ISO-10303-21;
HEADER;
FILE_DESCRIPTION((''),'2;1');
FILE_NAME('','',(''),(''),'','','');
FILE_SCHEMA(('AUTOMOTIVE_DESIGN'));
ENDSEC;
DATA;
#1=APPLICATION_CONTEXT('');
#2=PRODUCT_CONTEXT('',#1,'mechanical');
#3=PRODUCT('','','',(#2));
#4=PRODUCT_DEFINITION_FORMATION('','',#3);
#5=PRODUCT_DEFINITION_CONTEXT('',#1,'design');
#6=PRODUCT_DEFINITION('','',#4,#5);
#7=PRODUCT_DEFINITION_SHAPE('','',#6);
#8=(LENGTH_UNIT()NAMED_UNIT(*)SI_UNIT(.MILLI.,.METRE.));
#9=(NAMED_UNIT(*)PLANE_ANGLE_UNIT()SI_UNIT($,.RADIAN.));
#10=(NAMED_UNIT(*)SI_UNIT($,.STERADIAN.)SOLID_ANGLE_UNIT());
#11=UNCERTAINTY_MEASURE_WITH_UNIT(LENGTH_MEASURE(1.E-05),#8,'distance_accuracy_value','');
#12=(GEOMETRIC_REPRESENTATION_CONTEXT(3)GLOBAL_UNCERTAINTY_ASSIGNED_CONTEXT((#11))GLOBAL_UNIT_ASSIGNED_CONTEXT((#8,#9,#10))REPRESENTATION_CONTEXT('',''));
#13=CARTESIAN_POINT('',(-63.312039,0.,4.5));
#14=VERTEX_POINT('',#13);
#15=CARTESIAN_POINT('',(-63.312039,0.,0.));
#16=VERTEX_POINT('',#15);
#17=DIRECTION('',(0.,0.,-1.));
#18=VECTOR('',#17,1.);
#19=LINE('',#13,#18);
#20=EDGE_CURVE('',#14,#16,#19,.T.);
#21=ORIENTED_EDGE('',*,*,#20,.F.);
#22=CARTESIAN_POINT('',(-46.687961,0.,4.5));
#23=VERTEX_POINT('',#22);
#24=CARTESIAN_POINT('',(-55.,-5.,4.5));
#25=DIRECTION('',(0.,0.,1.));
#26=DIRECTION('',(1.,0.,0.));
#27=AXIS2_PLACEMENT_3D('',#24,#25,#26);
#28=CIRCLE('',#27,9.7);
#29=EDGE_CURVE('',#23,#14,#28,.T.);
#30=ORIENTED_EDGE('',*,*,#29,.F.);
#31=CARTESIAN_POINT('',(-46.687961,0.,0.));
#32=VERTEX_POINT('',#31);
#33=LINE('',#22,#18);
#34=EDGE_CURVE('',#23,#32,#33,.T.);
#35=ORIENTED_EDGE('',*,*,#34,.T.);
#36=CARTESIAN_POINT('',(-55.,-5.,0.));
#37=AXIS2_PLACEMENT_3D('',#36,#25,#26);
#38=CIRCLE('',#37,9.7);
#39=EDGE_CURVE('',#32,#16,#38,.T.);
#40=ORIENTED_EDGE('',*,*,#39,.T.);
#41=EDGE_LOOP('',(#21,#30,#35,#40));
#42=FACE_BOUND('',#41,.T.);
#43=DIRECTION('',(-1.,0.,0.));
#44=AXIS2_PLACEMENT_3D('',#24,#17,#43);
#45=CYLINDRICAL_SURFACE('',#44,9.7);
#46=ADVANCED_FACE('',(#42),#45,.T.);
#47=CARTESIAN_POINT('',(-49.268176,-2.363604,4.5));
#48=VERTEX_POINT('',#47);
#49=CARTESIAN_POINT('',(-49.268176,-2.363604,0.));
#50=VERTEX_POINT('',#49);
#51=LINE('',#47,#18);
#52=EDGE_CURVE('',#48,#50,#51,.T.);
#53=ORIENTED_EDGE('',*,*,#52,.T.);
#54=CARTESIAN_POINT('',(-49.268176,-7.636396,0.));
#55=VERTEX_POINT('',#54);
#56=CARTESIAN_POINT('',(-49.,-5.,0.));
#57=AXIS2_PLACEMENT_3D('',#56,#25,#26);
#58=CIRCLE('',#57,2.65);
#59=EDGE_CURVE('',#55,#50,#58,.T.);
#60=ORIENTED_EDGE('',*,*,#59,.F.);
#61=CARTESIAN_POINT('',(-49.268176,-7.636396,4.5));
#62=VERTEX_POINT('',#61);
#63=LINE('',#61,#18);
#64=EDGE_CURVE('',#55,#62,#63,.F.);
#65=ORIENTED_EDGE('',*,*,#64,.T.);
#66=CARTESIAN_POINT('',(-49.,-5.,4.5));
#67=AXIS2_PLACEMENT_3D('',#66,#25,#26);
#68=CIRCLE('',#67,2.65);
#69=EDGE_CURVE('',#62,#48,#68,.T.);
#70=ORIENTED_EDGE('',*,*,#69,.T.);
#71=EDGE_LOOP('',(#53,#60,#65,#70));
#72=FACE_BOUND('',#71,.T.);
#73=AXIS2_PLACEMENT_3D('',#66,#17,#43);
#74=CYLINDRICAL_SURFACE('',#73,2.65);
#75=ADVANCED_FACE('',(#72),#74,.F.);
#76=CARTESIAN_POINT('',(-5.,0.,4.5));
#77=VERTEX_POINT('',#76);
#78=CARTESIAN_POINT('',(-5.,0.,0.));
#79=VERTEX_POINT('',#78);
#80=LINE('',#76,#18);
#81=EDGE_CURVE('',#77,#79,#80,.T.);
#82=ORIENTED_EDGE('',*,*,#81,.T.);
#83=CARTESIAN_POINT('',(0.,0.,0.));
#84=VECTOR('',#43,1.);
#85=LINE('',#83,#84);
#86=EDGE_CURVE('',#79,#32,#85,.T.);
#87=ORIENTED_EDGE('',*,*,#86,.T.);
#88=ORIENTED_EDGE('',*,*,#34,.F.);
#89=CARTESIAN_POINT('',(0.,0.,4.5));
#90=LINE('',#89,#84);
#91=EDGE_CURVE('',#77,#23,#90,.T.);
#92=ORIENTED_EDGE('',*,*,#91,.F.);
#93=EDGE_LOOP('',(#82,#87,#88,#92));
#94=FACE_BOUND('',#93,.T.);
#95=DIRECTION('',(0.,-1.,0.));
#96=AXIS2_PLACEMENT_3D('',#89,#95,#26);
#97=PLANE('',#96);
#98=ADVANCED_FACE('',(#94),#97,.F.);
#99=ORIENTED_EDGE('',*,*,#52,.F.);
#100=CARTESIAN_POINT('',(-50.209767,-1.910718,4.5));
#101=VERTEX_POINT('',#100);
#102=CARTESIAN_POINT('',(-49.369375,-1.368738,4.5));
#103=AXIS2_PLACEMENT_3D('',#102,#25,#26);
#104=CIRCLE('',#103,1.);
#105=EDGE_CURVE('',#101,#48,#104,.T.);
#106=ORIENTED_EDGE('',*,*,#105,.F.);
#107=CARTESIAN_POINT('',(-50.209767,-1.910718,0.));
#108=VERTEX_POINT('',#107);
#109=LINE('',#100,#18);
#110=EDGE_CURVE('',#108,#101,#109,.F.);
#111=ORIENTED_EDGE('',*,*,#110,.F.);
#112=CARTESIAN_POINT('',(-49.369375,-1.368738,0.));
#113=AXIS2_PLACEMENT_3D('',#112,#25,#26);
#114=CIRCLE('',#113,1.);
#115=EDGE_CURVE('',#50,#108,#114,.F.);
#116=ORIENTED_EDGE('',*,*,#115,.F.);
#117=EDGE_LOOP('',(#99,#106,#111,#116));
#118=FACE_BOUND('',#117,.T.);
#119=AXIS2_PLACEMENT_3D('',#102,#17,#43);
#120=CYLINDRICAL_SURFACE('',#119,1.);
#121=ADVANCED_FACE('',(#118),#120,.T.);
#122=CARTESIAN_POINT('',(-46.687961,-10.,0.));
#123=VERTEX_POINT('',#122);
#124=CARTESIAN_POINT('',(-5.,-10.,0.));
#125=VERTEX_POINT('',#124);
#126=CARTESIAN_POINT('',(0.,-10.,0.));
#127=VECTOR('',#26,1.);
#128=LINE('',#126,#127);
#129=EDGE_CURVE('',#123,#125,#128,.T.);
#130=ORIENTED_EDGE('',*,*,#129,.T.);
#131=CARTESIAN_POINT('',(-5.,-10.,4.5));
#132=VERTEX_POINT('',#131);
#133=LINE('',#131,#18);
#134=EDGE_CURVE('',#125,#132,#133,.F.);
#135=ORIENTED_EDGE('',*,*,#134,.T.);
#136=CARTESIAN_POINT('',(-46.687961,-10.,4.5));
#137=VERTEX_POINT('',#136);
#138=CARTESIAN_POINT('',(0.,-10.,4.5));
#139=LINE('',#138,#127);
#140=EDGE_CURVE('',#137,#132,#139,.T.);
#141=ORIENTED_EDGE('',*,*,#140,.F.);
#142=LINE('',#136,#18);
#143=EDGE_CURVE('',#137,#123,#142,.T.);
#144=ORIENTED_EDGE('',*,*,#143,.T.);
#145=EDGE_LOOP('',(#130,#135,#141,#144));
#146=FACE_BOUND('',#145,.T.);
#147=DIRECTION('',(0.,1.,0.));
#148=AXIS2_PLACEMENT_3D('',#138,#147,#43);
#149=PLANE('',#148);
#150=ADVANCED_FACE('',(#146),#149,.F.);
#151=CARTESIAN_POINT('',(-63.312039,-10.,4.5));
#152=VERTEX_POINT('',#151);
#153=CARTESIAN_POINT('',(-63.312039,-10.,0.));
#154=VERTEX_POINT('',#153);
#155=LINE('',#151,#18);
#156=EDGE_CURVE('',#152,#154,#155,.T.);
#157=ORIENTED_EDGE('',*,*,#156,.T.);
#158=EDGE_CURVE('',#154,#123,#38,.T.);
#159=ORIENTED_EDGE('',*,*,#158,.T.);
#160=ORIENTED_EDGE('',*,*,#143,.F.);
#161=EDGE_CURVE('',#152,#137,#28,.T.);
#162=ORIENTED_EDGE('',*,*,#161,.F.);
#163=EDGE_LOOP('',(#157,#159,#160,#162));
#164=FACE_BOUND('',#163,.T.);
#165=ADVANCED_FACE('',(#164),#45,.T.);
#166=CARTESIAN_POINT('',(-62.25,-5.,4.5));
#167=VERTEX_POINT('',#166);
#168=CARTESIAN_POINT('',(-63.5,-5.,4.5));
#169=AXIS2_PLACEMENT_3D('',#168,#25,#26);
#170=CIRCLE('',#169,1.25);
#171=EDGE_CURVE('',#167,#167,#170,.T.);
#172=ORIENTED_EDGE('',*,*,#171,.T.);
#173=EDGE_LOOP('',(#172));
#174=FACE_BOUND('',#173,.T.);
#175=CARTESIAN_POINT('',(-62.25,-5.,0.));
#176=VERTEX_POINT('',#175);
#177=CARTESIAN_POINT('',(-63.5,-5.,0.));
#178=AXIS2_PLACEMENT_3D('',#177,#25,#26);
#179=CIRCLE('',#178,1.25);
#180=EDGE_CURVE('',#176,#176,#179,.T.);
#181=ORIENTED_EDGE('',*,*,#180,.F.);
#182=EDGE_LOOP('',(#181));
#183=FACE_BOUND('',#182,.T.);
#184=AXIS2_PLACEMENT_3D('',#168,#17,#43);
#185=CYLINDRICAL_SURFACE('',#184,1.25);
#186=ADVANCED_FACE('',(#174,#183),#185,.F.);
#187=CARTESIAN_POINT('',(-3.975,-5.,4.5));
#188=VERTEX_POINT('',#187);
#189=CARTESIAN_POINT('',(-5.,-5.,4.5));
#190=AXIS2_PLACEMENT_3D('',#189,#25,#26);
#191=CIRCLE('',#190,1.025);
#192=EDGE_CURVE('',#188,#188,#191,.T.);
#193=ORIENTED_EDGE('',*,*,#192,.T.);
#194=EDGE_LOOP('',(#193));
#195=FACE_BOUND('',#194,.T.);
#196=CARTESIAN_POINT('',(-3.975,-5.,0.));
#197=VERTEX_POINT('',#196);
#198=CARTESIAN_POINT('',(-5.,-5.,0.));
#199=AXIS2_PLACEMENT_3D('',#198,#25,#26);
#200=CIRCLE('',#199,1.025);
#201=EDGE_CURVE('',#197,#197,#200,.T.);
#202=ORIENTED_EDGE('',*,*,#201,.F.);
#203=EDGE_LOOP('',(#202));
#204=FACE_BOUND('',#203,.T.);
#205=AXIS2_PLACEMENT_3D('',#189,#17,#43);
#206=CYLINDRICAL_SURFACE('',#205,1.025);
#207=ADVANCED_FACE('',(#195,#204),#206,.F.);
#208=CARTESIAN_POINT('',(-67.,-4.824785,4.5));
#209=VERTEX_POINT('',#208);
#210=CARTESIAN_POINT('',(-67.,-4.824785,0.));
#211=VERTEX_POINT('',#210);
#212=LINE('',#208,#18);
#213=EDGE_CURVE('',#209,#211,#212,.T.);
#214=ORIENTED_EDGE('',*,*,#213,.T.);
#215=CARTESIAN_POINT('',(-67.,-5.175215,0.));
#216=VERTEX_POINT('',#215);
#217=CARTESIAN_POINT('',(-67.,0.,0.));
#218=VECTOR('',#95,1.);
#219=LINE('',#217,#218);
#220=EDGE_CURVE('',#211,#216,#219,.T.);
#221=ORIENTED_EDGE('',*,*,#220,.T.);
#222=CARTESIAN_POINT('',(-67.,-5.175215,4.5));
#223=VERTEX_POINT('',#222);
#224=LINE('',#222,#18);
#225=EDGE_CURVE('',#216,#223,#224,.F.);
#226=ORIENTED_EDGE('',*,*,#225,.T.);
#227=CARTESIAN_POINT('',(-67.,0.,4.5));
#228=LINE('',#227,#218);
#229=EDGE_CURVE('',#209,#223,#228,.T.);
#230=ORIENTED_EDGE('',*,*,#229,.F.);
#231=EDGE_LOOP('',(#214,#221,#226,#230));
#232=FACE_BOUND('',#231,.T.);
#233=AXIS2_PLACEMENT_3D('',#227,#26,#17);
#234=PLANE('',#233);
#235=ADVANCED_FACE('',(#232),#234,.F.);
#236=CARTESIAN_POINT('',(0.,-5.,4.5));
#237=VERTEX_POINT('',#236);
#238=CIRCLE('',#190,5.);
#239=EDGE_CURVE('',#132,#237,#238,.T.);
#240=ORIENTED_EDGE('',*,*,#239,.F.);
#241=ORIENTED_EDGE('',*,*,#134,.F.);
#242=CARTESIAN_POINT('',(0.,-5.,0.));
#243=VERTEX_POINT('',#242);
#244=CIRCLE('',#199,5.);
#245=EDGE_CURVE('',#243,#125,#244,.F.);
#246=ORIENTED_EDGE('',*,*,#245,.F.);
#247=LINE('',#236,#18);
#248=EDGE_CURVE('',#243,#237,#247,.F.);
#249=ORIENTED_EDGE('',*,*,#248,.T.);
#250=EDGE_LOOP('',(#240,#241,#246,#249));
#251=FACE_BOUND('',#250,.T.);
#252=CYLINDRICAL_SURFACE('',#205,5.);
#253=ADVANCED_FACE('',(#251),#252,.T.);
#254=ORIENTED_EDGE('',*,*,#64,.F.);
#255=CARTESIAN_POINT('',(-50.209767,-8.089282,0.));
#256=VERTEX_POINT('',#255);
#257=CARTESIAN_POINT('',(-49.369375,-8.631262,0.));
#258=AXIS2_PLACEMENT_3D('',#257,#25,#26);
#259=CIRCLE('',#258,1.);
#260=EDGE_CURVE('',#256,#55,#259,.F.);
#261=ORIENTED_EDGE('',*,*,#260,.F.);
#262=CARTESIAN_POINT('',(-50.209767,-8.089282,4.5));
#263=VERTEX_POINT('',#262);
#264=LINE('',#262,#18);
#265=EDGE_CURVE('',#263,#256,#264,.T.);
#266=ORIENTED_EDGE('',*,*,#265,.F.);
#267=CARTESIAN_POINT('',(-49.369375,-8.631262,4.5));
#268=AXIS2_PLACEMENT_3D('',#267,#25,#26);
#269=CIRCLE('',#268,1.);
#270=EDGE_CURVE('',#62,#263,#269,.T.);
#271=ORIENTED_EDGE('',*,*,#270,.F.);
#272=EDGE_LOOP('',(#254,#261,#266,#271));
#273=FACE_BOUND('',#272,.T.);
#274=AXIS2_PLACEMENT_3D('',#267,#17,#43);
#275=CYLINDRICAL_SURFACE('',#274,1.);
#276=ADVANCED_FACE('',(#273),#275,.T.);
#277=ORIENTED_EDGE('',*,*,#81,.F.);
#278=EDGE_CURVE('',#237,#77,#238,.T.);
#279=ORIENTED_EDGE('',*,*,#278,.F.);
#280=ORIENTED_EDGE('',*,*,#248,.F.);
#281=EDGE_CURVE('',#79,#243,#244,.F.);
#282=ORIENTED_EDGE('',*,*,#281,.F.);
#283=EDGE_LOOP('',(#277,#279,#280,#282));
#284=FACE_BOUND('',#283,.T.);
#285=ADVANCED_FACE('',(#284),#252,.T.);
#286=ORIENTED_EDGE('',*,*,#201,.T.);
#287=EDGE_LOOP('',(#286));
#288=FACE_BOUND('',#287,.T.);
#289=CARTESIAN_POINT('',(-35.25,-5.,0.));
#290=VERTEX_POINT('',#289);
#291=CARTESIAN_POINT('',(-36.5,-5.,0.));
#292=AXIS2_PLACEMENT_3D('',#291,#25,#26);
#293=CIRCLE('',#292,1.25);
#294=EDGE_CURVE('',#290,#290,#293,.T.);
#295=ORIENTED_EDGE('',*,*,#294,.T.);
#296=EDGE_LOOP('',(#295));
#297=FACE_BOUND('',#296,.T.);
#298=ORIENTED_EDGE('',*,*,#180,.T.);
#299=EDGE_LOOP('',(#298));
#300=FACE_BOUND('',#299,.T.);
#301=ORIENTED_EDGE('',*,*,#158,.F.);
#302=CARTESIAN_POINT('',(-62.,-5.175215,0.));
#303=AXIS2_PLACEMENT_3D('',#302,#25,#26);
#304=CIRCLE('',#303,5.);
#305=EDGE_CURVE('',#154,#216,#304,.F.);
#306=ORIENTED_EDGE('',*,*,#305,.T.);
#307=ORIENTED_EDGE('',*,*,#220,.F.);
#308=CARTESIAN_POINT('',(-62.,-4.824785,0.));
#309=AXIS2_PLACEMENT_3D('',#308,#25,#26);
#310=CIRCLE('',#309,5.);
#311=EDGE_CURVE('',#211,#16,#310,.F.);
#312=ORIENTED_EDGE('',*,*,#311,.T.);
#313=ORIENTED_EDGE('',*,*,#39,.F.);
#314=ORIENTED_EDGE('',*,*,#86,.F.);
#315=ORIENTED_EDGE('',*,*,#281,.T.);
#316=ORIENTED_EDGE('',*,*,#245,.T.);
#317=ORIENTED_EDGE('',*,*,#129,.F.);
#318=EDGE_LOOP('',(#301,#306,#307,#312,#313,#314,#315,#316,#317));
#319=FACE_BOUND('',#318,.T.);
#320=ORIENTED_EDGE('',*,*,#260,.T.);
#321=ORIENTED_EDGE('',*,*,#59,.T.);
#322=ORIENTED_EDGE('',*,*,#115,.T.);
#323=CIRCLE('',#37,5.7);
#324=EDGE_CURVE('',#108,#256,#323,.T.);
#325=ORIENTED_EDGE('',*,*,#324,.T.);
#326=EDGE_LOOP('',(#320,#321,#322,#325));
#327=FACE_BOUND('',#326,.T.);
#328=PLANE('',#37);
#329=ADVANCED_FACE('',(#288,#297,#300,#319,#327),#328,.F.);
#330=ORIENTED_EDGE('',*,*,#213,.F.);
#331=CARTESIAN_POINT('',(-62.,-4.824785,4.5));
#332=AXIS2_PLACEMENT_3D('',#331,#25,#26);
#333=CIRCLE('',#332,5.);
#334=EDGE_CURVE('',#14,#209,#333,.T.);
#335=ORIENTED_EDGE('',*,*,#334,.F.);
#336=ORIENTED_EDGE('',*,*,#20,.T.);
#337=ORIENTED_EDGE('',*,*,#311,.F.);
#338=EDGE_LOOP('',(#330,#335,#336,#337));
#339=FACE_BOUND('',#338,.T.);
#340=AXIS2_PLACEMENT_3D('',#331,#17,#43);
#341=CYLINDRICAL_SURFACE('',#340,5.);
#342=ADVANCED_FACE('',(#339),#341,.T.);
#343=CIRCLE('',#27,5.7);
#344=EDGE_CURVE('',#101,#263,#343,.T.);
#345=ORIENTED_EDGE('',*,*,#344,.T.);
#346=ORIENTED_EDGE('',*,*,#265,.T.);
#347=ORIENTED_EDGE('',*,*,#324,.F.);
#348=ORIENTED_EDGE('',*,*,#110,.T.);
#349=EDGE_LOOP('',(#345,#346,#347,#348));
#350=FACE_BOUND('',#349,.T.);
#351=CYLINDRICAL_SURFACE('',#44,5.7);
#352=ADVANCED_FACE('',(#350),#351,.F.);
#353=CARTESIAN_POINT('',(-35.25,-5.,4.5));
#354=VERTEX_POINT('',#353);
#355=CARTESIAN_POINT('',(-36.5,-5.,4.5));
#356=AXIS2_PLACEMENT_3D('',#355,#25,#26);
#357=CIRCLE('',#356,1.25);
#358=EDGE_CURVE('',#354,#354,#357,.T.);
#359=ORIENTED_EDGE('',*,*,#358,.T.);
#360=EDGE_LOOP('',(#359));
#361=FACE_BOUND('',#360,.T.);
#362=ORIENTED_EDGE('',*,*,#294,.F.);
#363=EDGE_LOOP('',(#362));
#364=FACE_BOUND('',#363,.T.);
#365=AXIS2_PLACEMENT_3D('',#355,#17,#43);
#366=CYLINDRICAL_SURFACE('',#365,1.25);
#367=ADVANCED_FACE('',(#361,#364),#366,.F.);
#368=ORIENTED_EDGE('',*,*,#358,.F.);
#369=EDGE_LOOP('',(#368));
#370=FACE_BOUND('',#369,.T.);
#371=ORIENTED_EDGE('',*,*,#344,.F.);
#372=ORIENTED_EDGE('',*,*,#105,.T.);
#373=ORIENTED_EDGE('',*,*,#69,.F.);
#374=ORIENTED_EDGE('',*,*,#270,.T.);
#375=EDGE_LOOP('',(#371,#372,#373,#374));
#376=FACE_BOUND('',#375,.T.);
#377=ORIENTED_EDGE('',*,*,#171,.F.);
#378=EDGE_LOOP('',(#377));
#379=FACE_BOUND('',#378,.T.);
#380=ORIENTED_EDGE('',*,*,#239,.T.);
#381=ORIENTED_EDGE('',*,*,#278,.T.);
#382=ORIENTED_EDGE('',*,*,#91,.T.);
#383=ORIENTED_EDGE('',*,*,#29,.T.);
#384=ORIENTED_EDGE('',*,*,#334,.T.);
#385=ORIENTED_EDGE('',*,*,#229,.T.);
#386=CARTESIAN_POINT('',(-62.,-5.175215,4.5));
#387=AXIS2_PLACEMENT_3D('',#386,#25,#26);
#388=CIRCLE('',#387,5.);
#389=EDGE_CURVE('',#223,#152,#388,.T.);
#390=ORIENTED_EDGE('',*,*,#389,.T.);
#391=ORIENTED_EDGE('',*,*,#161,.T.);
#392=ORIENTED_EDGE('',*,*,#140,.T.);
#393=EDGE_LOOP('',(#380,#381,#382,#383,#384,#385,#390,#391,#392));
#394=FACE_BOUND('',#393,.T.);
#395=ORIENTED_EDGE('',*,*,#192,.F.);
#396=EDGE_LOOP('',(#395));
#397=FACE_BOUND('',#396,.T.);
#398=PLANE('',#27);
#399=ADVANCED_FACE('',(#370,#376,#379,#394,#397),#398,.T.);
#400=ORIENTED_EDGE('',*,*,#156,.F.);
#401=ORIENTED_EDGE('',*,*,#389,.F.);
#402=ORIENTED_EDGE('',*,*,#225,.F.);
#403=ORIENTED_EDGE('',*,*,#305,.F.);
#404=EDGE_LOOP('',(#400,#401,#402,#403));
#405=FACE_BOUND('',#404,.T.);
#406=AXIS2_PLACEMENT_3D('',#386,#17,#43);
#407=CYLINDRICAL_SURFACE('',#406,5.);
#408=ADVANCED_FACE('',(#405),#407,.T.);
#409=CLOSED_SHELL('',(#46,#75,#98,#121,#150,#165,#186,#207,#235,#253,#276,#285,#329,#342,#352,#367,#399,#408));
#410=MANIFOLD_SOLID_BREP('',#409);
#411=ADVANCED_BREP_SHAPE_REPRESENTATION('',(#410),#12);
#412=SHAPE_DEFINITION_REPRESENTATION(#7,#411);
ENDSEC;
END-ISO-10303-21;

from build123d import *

# Parameters (mm, degrees)
SKETCH_1_R      = 1.025
SKETCH_1_R_2    = 1.25
EXTRUDE_1_DEPTH = 4.5
FILLET_1_R      = 1
FILLET_2_R      = 5
FILLET_3_R      = 5


# Some blends are built 0.0001 mm under size
with BuildPart() as part:
    # 草图1 → 凸台-拉伸1 (new body)
    with BuildSketch(Plane.XY):
        with BuildLine():
            Line((-63.312039461, 0), (-67, 0))
            Line((-67, 0), (-67, -10))
            Line((-67, -10), (-63.312039461, -10))
            ThreePointArc((-63.312039461, -10), (-55, -14.7), (-46.687960539, -10))
            Line((-46.687960539, -10), (0, -10))
            Line((0, -10), (0, 0))
            Line((0, 0), (-46.687960539, 0))
            ThreePointArc((-46.687960539, 0), (-55, 4.7), (-63.312039461, 0))
        make_face()
        with Locations((-5, -5)):
            Circle(SKETCH_1_R, mode=Mode.SUBTRACT)
        with Locations((-63.5, -5)):
            Circle(SKETCH_1_R_2, mode=Mode.SUBTRACT)
        with Locations((-36.5, -5)):
            Circle(SKETCH_1_R_2, mode=Mode.SUBTRACT)
        with BuildLine():
            ThreePointArc((-49.877708333, -2.49957442), (-60.7, -5), (-49.877708333, -7.50042558))
            ThreePointArc((-49.877708333, -7.50042558), (-46.35, -5), (-49.877708333, -2.49957442))
        make_face(mode=Mode.SUBTRACT)
    extrude(amount=EXTRUDE_1_DEPTH)

    # 圆角1
    fillet_1_edges = [part.edges().sort_by_distance(p)[0] for p in [
        (-49.877708333, -7.50042558, 2.25),
        (-49.877708333, -2.49957442, 2.25),
    ]]
    fillet(fillet_1_edges, radius=FILLET_1_R)

    # 圆角2
    fillet_2_edges = [part.edges().sort_by_distance(p)[0] for p in [
        (0, -10, 2.25),
        (0, 0, 2.25),
    ]]
    fillet(fillet_2_edges, radius=FILLET_2_R - 0.0001)  # a hair under: the kernel refuses the full size

    # 圆角3
    # the kernel refuses this fillet: 5 mm, written as the material it takes off along each edge
    with BuildSketch(Plane(origin=(-67, 0, -12.061963059), x_dir=(0, -1, 0), z_dir=(0, 0, 1))) as fillet_3_piece_1:
        with BuildLine():
            CenterArc((4.824785224, 5), FILLET_3_R, 195.212986046, 74.787013954)
            Line((0, 3.687960539), (-0.096495704, 3.66171975))
            ThreePointArc((-0.096495704, 3.66171975), (-0.1, 1.84398027), (-0.1, 0))
            Line((-0.1, 0), (0, -0.1))
            Line((0, -0.1), (4.824785224, -0.1))
            Line((4.824785224, -0.1), (4.824785224, 0))
        make_face()
    extrude(amount=28.623926118, mode=Mode.SUBTRACT)
    with BuildSketch(Plane(origin=(-67, -10, -12.061963059), x_dir=(1, 0, 0), z_dir=(0, 0, 1))) as fillet_3_piece_2:
        with BuildLine():
            CenterArc((5, 4.824785224), FILLET_3_R, 180, 74.787013954)
            Line((0, 4.824785224), (-0.1, 4.824785224))
            Line((-0.1, 4.824785224), (-0.1, 0))
            Line((-0.1, 0), (0, -0.1))
            ThreePointArc((0, -0.1), (1.84398027, -0.1), (3.66171975, -0.096495704))
            Line((3.66171975, -0.096495704), (3.687960539, 0))
        make_face()
    extrude(amount=28.623926118, mode=Mode.SUBTRACT)


solid = part.part
